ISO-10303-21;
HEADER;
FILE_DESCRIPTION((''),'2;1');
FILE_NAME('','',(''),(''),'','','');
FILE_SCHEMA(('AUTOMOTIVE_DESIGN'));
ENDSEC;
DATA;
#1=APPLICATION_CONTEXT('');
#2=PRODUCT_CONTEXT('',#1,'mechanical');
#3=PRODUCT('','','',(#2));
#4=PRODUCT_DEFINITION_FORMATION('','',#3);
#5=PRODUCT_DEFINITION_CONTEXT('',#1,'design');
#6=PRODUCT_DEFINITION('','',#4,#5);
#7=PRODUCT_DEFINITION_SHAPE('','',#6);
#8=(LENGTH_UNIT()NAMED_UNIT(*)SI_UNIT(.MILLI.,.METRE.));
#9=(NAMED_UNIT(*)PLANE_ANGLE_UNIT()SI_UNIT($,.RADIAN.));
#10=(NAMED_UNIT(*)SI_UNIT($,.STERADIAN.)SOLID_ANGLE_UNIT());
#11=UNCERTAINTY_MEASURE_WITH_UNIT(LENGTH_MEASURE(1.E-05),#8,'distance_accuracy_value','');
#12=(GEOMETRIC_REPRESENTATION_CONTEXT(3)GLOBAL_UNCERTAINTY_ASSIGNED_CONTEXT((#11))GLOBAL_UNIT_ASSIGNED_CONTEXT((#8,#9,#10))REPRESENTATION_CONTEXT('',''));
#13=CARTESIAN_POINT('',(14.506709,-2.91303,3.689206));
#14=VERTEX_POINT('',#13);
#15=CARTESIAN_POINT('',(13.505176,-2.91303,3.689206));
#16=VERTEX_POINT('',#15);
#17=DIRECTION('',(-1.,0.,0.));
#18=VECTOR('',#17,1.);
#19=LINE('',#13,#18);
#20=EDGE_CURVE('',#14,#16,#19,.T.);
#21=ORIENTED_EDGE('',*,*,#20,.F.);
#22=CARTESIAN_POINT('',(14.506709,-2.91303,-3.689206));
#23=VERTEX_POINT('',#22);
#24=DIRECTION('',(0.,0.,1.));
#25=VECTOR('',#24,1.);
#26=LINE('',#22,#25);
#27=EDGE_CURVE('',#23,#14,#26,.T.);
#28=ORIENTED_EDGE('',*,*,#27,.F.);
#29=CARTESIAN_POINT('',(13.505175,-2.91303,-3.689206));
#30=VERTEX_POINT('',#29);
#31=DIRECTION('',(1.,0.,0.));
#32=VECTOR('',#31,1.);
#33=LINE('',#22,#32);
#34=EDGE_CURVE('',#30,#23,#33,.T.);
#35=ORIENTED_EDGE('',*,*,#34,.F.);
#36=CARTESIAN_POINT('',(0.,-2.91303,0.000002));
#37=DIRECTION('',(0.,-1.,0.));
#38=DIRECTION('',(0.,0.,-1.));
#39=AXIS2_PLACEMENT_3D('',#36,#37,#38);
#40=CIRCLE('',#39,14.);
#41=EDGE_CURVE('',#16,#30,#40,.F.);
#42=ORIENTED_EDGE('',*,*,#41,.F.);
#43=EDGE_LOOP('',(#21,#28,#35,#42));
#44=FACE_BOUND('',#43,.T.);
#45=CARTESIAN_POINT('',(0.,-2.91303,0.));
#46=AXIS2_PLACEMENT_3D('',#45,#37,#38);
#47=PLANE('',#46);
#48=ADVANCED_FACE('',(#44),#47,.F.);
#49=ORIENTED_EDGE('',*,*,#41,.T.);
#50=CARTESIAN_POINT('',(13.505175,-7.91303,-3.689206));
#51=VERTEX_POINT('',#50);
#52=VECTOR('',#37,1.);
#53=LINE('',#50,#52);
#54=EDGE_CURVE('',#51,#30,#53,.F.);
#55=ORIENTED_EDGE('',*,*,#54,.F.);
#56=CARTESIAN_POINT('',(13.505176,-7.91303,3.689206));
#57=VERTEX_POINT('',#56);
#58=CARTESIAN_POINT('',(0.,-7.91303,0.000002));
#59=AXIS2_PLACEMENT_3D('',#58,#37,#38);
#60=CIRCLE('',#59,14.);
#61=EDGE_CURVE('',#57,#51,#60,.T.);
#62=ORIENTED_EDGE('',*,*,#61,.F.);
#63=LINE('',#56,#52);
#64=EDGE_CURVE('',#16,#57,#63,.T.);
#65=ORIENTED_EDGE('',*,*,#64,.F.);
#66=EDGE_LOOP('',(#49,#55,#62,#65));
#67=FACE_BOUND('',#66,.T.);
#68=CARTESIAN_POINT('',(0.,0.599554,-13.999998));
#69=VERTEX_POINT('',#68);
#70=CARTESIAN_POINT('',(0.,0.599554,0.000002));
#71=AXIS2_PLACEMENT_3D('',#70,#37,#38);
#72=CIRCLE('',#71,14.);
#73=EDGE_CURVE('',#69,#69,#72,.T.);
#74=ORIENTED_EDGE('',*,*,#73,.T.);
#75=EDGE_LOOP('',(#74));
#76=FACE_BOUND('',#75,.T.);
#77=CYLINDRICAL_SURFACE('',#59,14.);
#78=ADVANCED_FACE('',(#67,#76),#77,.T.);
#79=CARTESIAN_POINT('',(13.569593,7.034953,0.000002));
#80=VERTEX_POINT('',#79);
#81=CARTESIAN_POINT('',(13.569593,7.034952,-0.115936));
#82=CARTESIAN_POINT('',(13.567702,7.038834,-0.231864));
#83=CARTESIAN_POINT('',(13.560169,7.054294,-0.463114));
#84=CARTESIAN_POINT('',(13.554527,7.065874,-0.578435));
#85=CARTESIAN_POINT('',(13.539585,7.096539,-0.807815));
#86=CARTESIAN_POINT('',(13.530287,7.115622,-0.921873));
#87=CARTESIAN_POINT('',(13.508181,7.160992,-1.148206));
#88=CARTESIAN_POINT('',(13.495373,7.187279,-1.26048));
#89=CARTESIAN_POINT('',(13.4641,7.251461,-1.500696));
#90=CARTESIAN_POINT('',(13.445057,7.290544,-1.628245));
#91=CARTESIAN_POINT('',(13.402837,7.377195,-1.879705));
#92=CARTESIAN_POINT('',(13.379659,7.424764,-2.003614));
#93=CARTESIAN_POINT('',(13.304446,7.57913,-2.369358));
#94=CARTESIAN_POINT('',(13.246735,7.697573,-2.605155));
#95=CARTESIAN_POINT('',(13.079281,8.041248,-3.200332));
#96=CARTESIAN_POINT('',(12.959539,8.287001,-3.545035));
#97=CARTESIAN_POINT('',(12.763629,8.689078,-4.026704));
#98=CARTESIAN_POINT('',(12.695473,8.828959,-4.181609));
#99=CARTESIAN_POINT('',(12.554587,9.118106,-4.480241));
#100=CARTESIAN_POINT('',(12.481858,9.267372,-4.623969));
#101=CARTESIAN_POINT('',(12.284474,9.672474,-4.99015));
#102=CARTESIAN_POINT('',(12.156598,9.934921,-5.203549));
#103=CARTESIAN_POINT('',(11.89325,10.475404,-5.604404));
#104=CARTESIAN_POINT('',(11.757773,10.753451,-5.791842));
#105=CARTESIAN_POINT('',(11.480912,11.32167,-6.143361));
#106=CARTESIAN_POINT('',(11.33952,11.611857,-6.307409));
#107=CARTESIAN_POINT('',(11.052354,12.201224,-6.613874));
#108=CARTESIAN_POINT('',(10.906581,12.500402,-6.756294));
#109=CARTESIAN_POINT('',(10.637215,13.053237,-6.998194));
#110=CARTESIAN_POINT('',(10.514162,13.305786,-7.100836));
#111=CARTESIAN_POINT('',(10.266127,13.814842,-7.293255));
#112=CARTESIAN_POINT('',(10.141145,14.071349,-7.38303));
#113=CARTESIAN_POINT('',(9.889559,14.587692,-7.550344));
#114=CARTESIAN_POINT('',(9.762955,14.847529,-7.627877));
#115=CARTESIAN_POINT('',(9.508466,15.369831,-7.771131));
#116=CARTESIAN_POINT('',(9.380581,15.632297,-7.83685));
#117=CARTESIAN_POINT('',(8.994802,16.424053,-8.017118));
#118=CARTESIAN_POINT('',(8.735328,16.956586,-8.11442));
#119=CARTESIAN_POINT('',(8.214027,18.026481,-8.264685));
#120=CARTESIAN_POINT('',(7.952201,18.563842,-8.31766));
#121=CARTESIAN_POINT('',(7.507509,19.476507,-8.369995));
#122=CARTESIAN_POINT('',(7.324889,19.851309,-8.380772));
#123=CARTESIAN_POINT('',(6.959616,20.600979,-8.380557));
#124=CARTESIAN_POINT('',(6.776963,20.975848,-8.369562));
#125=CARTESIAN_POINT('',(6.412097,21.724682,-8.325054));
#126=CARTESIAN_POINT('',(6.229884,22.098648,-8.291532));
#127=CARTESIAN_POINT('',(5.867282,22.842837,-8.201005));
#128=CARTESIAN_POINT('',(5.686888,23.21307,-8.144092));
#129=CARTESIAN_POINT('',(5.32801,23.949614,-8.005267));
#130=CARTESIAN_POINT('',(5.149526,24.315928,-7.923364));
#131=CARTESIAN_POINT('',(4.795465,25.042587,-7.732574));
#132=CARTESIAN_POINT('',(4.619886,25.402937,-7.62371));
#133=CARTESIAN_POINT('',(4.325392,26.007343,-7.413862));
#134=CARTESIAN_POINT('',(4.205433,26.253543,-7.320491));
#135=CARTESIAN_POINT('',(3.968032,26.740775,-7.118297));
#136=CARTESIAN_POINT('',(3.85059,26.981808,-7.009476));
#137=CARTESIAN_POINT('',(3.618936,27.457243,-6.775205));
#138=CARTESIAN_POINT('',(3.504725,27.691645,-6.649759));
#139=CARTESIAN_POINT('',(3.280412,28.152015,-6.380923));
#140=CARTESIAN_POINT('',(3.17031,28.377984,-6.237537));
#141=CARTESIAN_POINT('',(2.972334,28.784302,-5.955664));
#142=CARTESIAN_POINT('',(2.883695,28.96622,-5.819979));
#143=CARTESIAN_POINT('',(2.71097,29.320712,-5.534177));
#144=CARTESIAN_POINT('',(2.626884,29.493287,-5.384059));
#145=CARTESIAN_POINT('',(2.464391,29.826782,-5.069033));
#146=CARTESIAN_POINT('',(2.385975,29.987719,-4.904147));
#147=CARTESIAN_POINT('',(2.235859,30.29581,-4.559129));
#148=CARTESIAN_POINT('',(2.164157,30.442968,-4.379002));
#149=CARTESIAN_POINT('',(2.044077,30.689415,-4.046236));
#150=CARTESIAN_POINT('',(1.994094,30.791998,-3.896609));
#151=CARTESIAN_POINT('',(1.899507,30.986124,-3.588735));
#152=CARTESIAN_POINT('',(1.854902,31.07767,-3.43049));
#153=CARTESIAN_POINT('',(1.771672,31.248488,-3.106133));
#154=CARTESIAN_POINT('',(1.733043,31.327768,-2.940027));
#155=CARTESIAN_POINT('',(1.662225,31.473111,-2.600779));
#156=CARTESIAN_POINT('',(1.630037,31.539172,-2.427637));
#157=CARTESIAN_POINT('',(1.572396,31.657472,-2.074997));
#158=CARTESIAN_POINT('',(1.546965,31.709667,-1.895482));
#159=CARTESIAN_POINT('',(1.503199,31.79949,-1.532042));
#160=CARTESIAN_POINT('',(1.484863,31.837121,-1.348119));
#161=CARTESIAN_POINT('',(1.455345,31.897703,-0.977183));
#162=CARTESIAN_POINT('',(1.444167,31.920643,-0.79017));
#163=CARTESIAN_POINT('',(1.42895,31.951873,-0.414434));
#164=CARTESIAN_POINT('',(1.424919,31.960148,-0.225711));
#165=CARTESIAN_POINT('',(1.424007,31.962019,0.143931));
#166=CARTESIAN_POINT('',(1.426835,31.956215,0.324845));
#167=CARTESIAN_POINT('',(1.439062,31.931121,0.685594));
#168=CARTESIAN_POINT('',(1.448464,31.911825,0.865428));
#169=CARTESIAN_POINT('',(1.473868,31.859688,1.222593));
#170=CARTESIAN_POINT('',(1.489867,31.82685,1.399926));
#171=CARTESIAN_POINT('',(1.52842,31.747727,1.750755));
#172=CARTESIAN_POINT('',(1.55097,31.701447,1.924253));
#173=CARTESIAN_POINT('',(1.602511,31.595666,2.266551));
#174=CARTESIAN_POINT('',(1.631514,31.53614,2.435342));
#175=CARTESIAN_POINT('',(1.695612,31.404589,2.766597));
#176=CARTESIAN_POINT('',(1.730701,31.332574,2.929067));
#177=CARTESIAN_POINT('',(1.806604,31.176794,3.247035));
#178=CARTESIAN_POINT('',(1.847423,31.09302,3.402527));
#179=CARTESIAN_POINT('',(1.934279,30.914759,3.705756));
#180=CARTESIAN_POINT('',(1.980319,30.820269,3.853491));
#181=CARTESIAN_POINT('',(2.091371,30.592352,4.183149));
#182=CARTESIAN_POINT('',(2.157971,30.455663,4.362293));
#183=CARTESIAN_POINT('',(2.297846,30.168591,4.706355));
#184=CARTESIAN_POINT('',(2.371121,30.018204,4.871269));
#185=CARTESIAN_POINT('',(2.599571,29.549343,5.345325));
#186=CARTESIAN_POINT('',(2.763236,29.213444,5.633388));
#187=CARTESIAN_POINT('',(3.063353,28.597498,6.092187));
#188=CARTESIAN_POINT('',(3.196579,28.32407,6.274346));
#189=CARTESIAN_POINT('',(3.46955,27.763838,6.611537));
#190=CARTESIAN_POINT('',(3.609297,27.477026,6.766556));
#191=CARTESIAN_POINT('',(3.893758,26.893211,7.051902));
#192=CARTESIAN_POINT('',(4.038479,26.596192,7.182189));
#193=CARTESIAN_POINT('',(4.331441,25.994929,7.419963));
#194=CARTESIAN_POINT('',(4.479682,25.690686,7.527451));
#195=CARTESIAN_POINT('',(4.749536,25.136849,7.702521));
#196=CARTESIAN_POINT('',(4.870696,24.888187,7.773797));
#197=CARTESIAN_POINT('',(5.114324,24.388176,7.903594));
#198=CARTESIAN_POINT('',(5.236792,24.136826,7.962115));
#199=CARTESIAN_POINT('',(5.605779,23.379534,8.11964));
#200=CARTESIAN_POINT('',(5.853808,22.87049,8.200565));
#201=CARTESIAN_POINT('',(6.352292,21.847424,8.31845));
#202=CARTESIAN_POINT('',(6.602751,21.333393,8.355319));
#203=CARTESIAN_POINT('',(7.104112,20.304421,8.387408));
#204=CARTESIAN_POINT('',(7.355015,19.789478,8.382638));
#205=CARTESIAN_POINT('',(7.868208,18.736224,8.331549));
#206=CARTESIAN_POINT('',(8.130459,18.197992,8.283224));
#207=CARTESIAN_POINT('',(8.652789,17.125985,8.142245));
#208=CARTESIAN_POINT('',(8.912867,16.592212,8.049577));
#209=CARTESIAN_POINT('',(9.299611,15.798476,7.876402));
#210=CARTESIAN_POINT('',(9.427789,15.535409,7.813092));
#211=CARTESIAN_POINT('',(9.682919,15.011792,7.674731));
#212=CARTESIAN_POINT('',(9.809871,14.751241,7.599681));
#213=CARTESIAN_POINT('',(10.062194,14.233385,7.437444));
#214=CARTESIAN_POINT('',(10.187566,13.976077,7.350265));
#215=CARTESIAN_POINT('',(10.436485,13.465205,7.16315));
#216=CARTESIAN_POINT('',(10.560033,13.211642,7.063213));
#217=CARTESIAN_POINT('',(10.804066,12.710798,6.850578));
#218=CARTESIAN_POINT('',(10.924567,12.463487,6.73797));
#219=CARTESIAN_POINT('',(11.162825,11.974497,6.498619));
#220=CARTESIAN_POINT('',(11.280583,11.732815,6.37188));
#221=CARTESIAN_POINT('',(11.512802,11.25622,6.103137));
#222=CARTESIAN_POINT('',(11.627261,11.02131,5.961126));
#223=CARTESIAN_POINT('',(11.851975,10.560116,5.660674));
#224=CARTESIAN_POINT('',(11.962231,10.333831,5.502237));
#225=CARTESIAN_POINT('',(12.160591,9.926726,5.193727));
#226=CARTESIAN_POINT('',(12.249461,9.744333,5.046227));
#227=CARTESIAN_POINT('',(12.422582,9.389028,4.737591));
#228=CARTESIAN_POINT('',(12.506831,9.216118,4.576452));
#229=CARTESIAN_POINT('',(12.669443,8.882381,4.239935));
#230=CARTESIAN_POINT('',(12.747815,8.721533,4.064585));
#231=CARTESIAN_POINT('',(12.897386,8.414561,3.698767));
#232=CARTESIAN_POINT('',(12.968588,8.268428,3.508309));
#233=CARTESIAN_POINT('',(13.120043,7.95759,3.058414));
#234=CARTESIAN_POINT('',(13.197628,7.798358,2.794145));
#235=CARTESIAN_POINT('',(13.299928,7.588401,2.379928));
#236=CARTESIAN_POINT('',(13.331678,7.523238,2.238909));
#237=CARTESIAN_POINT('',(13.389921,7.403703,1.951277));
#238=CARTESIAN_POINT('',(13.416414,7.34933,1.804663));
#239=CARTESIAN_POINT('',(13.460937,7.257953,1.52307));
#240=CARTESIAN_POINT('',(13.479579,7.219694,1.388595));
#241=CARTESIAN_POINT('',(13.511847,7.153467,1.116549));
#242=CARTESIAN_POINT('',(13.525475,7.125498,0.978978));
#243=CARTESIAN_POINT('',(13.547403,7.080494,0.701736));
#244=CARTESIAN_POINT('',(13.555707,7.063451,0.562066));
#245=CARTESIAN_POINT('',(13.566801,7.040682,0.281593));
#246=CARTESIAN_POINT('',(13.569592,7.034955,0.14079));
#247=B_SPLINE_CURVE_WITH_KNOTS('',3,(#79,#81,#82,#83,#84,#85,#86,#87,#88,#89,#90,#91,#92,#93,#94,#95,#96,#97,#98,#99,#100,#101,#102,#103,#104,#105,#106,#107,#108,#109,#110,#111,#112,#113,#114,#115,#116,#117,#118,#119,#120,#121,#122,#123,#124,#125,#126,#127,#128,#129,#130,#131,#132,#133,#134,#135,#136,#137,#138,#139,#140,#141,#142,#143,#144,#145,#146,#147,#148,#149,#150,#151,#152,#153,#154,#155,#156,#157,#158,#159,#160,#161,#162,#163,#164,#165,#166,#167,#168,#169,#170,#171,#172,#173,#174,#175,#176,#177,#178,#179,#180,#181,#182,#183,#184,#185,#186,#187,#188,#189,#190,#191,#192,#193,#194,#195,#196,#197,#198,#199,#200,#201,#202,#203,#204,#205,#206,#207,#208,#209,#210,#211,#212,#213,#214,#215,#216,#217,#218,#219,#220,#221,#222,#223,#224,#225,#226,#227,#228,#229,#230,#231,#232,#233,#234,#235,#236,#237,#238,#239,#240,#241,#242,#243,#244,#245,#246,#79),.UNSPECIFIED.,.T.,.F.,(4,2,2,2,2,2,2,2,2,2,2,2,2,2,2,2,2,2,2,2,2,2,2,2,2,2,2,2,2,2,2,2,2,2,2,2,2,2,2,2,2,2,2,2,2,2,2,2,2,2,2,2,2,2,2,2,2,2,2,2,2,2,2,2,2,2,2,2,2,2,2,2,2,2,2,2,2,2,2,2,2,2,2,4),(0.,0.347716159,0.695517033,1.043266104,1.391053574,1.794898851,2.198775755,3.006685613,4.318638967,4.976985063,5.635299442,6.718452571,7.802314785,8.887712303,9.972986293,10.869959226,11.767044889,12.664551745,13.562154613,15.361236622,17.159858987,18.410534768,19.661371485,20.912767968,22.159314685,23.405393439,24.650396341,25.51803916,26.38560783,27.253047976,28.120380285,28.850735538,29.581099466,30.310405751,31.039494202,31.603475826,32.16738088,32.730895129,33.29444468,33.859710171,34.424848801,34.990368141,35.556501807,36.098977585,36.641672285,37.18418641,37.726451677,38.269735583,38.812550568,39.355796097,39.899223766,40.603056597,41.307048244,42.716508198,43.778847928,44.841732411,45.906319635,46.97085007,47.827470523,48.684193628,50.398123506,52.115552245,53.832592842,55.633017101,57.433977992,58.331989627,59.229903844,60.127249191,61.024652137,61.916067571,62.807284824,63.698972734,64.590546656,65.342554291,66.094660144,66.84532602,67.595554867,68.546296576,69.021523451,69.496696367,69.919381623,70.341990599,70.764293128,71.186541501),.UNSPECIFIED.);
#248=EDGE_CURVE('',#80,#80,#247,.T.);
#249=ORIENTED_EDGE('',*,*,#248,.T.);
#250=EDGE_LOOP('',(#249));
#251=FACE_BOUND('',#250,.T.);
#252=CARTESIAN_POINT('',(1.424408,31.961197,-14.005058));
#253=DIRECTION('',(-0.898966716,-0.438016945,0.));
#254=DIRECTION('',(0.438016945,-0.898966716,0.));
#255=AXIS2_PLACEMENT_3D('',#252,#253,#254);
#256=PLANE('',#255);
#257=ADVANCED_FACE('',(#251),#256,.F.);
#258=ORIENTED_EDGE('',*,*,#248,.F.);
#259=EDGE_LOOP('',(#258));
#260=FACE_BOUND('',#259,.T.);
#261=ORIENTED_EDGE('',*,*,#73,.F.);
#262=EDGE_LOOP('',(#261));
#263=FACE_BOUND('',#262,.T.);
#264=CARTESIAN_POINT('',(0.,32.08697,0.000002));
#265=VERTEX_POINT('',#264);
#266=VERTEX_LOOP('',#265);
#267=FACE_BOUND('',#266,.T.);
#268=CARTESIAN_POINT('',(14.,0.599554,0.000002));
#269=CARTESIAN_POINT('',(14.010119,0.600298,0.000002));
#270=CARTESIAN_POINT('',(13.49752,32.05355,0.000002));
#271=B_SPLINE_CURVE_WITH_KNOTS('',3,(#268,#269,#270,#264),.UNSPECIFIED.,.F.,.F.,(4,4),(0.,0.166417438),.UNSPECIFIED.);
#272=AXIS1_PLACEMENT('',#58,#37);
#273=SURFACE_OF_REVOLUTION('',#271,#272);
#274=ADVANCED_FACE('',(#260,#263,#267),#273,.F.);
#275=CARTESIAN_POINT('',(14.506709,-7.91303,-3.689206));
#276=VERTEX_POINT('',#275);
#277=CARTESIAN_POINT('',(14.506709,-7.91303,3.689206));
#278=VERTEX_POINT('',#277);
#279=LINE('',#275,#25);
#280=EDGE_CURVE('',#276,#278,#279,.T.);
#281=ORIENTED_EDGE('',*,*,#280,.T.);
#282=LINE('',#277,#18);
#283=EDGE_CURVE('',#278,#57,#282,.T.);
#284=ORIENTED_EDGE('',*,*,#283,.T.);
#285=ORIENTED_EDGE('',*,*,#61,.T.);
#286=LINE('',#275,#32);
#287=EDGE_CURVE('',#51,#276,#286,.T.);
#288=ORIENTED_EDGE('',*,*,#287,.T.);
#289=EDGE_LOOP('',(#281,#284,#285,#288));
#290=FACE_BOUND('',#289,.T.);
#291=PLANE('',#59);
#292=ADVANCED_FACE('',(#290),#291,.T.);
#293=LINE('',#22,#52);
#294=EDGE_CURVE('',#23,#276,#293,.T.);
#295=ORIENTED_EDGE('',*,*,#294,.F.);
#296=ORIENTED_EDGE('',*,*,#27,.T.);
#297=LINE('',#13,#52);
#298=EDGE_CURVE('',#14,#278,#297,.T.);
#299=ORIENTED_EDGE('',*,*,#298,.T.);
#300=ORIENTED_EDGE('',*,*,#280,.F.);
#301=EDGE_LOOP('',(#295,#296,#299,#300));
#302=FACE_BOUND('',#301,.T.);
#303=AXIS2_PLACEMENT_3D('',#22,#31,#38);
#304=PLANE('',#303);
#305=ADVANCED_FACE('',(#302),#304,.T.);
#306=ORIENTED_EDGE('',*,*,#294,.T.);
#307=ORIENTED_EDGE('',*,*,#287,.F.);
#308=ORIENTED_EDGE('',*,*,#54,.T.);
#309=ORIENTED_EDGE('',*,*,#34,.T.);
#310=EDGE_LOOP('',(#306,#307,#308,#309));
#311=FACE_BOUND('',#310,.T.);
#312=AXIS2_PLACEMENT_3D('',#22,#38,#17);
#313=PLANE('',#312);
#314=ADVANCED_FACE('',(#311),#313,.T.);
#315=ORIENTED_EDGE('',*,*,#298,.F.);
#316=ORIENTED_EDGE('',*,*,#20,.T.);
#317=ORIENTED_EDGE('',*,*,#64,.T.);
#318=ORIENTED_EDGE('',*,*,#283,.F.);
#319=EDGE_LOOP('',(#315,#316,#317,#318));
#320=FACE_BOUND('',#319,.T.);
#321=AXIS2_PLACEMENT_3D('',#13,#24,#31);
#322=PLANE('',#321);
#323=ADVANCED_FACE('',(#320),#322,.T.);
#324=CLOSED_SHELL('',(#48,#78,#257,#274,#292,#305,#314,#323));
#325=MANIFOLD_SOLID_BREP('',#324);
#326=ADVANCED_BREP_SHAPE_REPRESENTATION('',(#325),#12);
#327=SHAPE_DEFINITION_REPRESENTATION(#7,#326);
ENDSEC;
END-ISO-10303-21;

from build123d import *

# Parameters (mm, degrees)
SCALE2_SCALE           = 2
CUT_EXTRUDE1_START     = 15.280040905
CUT_EXTRUDE1_OUTLINE_W = 31
CUT_EXTRUDE1_OUTLINE_H = 20
CUT_EXTRUDE1_DEPTH     = 3.866864707
SKETCH3_W              = 4.189437374
SKETCH3_H              = 7.378412092
BOSS_EXTRUDE1_DEPTH    = 5


# Read off the part's stored shape, not the designer's step: Cut-Extrude1
with BuildPart() as part:
    # Sketch1 → Revolve1 (revolve)
    with BuildSketch(Plane.XY, mode=Mode.PRIVATE) as revolve1_sk:
        with BuildLine():
            Line((7, 4.256292026), (7, 0))
            Line((7, 0), (0, 0))
            Line((0, 0), (0, 20))
            add(Edge.make_bspline(
                [(0, 20), (6.748759859, 19.983290112), (7.005059619, 4.256663996), (7, 4.256292026)],
                knots=[0, 0, 0, 0, 0.166417438, 0.166417438, 0.166417438, 0.166417438], degree=3))
        make_face()
    revolve(revolve1_sk.sketch.rotate(Axis((0, 0, 0), (0, 1, 0)), 90), axis=Axis((0, 0, 0), (0, 1, 0)))


with BuildPart() as part_1:
    # Scale2: scaled about (0, 7.913014441, 0)
    add(part.part.scale(SCALE2_SCALE).moved(Location((0, -7.913014441, 0))))

    # Cut-Extrude1 outline → Cut-Extrude1 (cut)
    with BuildSketch(Plane(origin=(0, 0, 0), x_dir=(0.43801694528234036, -0.8989667155381935, 0), z_dir=(0.8989667155381934, 0.4380169452823407, 0)).offset(CUT_EXTRUDE1_START)):
        with Locations((-14.5, 0)):
            Rectangle(CUT_EXTRUDE1_OUTLINE_W, CUT_EXTRUDE1_OUTLINE_H)
    extrude(amount=CUT_EXTRUDE1_DEPTH, mode=Mode.SUBTRACT)

    # Sketch3 → Boss-Extrude1 (add)
    with BuildSketch(Plane(origin=(0, -7.913030029, 0), x_dir=(-1, 0, 0), z_dir=(0, -1, 0))):
        with Locations((-12.411989831, 0)):
            Rectangle(SKETCH3_W, SKETCH3_H)
    extrude(amount=-BOSS_EXTRUDE1_DEPTH)


solid = part_1.part
